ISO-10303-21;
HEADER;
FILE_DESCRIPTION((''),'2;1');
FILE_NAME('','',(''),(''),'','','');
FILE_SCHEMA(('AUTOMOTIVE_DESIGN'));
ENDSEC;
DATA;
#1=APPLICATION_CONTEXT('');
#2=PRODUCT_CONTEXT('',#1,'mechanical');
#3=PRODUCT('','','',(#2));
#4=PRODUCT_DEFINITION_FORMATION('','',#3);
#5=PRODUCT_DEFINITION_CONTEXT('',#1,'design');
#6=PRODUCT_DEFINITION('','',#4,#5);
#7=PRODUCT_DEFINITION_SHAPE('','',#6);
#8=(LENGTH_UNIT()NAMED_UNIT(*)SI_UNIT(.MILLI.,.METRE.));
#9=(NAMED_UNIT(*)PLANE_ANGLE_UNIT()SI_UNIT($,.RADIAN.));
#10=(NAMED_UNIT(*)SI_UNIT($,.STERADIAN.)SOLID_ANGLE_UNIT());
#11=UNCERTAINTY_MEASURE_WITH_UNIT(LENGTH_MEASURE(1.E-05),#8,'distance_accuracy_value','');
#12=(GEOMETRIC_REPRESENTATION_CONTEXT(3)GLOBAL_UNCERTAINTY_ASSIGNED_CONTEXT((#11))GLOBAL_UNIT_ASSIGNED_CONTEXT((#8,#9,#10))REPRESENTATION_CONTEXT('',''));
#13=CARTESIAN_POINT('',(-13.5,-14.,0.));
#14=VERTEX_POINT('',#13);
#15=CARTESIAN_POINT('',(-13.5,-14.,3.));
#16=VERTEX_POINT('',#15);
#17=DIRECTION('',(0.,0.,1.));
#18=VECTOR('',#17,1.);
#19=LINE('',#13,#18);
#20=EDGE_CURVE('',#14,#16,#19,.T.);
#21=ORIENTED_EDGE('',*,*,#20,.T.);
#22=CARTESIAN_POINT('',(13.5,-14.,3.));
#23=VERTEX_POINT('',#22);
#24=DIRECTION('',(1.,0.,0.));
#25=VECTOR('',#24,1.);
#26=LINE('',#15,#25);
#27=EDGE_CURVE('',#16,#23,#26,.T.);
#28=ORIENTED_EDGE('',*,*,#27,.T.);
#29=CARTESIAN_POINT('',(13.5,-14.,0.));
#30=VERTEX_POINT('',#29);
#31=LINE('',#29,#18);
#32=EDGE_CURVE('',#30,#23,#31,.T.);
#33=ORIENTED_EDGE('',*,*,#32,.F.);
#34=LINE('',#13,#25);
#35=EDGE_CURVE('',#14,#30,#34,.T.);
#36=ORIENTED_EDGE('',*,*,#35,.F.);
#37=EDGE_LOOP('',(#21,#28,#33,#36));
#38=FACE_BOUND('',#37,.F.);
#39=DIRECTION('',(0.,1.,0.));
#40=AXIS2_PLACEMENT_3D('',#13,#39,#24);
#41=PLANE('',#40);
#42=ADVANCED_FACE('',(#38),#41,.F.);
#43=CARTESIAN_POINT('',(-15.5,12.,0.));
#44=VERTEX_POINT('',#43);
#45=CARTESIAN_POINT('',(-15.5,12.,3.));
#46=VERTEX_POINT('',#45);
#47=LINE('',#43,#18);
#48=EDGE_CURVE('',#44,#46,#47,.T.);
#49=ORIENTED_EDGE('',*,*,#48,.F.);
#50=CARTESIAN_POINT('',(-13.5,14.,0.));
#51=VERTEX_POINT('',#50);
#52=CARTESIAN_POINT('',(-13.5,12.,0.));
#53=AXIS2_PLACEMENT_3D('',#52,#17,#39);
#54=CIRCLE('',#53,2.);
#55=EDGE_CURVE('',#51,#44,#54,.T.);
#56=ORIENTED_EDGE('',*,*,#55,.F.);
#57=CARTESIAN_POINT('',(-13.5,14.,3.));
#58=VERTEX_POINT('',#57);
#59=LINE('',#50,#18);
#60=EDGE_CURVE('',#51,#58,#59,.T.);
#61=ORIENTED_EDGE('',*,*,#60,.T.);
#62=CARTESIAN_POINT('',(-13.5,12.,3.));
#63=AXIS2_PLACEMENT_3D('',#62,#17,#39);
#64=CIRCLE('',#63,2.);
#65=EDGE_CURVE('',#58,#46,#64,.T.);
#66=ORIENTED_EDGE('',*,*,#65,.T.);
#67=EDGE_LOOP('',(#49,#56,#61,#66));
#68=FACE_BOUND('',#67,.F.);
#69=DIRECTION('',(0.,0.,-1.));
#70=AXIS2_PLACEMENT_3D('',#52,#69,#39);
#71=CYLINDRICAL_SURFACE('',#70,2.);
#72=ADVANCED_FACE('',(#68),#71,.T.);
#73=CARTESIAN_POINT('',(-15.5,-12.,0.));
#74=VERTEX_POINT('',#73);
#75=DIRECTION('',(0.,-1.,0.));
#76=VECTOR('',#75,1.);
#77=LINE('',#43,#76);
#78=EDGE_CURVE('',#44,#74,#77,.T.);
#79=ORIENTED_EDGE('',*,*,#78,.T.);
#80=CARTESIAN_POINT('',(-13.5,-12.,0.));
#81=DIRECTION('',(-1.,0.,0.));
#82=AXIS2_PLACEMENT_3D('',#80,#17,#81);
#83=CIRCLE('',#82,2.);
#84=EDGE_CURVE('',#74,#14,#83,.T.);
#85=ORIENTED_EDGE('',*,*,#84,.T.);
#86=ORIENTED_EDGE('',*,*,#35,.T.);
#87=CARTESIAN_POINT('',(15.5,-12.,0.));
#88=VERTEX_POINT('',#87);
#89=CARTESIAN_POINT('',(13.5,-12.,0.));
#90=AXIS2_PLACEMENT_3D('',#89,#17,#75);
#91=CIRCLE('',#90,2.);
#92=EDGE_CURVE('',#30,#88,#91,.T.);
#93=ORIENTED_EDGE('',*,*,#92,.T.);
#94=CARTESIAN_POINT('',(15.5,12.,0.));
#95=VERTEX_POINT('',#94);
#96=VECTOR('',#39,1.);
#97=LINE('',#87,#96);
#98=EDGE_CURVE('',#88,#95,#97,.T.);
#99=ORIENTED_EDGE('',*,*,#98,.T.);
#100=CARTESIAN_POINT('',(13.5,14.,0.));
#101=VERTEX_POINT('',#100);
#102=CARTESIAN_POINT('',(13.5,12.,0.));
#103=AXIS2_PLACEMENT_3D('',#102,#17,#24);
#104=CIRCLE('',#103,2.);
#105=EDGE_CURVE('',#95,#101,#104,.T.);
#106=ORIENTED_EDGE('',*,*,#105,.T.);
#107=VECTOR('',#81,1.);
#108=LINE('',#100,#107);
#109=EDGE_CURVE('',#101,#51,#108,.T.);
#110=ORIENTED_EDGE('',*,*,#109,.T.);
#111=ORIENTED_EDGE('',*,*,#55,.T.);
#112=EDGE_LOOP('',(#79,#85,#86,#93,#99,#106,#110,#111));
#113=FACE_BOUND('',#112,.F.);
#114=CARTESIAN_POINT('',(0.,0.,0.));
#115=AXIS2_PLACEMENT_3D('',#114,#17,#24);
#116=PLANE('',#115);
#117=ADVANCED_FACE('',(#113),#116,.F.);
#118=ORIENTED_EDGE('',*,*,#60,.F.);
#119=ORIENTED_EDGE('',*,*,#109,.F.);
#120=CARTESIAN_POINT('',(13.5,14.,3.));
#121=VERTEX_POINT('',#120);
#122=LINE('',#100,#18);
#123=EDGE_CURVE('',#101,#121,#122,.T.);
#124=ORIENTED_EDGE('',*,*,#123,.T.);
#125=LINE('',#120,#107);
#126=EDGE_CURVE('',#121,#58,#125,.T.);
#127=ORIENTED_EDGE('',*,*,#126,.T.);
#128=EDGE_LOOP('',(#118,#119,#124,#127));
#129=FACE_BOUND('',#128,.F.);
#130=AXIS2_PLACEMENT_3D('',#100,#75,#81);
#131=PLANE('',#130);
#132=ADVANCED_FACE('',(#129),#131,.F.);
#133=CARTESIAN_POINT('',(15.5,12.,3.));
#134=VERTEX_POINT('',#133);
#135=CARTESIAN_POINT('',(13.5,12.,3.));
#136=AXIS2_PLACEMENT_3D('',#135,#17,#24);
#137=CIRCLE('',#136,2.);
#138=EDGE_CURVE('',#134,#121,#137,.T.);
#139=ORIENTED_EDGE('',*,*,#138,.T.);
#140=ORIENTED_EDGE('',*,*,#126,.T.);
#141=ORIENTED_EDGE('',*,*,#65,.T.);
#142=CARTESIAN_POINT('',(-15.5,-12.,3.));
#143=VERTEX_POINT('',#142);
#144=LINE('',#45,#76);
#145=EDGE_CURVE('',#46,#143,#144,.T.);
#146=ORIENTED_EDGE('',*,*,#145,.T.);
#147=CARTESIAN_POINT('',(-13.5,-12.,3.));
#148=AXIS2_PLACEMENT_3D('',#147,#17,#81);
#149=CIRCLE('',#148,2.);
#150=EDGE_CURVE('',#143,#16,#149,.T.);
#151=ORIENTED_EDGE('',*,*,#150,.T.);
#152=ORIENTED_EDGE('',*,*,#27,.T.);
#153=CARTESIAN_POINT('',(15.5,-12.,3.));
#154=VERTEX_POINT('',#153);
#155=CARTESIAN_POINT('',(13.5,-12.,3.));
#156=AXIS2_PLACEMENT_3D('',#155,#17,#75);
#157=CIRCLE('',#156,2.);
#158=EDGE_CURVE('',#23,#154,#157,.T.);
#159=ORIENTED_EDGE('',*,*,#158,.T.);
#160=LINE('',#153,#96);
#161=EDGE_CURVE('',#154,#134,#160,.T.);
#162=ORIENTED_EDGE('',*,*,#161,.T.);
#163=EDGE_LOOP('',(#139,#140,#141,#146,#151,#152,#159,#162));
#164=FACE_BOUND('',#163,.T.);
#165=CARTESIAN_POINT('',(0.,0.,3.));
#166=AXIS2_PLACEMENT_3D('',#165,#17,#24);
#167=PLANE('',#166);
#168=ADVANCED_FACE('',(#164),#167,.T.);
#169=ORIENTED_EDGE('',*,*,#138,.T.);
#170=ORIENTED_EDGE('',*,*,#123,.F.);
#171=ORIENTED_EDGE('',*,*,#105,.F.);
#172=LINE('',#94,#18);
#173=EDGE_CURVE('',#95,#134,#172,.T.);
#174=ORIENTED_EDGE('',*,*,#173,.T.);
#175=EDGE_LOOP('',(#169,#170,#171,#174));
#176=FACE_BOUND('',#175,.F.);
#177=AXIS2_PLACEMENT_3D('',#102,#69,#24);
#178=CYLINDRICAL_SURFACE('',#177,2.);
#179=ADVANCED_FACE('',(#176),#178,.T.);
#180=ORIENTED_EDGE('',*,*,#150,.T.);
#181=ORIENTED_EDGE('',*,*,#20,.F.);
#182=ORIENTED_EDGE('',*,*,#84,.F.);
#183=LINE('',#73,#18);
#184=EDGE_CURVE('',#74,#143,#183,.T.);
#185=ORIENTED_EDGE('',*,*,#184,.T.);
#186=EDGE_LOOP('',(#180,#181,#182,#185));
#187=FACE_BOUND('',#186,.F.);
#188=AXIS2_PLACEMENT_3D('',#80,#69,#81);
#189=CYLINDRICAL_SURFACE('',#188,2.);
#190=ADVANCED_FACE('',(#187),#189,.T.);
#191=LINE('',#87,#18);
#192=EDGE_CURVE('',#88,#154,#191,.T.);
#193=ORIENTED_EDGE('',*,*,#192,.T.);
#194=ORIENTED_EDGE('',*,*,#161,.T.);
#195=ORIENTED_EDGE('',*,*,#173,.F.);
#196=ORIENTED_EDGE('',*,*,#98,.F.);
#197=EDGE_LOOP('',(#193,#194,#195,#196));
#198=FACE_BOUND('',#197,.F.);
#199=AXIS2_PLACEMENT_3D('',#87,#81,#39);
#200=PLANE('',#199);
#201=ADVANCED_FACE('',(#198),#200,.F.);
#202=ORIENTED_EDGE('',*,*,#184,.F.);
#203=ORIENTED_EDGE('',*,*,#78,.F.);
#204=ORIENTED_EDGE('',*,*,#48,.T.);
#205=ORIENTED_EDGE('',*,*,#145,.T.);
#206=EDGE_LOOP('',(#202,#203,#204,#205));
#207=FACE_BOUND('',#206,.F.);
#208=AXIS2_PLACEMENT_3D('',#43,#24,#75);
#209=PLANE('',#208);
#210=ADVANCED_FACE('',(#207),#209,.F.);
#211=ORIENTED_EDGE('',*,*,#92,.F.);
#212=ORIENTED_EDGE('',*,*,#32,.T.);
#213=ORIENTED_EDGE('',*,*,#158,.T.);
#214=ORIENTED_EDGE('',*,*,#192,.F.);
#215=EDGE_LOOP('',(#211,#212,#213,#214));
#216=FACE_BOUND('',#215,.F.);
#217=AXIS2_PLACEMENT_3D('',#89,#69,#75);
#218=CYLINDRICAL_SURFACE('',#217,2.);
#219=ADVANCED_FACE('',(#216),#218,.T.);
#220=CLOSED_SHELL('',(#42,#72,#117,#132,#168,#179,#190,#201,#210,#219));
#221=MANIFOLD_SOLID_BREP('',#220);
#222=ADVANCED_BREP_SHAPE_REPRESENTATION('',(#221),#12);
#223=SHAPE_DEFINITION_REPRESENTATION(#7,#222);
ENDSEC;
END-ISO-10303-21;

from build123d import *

# Parameters (mm, degrees)
F0_W     = 25
F0_H     = 21
F0_W_2   = 3
F0_H_2   = 6
F0_R     = 3
F0_R_2   = 2.65
F1_DEPTH = 3


with BuildPart() as f1:
    # F0 (on Top) → F1 (new body)
    with BuildSketch(Plane.XY):
        with BuildLine():
            ThreePointArc((15.5, 12), (14.9142135624, 13.4142135624), (13.5, 14))
            Line((13.5, 14), (-13.5, 14))
            ThreePointArc((-13.5, 14), (-14.9142135624, 13.4142135624), (-15.5, 12))
            Line((-15.5, 12), (-15.5, -12))
            ThreePointArc((-15.5, -12), (-14.9142135624, -13.4142135624), (-13.5, -14))
            Line((-13.5, -14), (13.5, -14))
            ThreePointArc((13.5, -14), (14.9142135624, -13.4142135624), (15.5, -12))
            Line((15.5, -12), (15.5, 12))
        make_face()
        Rectangle(F0_W, F0_H, mode=Mode.SUBTRACT)
        Rectangle(F0_W, F0_H)
        with Locations((-7.5, -2.7)):
            Rectangle(F0_W_2, F0_H_2, mode=Mode.SUBTRACT)
        with Locations((7.5, -2.7)):
            Rectangle(F0_W_2, F0_H_2, mode=Mode.SUBTRACT)
        with Locations((-7.5, 5.2)):
            Circle(F0_R, mode=Mode.SUBTRACT)
        with Locations((7.5, 5.2)):
            Circle(F0_R, mode=Mode.SUBTRACT)
        with Locations((7.5, 5.2)):
            Circle(F0_R)
        with Locations((7.5, 5.2)):
            Circle(F0_R_2, mode=Mode.SUBTRACT)
        with Locations((-7.5, 5.2)):
            Circle(F0_R)
        with Locations((-7.5, 5.2)):
            Circle(F0_R_2, mode=Mode.SUBTRACT)
        with Locations((7.5, 5.2)):
            Circle(F0_R_2)
        with Locations((-7.5, 5.2)):
            Circle(F0_R_2)
        with Locations((7.5, -2.7)):
            Rectangle(F0_W_2, F0_H_2)
        with Locations((-7.5, -2.7)):
            Rectangle(F0_W_2, F0_H_2)
    extrude(amount=F1_DEPTH)


solid = f1.part
